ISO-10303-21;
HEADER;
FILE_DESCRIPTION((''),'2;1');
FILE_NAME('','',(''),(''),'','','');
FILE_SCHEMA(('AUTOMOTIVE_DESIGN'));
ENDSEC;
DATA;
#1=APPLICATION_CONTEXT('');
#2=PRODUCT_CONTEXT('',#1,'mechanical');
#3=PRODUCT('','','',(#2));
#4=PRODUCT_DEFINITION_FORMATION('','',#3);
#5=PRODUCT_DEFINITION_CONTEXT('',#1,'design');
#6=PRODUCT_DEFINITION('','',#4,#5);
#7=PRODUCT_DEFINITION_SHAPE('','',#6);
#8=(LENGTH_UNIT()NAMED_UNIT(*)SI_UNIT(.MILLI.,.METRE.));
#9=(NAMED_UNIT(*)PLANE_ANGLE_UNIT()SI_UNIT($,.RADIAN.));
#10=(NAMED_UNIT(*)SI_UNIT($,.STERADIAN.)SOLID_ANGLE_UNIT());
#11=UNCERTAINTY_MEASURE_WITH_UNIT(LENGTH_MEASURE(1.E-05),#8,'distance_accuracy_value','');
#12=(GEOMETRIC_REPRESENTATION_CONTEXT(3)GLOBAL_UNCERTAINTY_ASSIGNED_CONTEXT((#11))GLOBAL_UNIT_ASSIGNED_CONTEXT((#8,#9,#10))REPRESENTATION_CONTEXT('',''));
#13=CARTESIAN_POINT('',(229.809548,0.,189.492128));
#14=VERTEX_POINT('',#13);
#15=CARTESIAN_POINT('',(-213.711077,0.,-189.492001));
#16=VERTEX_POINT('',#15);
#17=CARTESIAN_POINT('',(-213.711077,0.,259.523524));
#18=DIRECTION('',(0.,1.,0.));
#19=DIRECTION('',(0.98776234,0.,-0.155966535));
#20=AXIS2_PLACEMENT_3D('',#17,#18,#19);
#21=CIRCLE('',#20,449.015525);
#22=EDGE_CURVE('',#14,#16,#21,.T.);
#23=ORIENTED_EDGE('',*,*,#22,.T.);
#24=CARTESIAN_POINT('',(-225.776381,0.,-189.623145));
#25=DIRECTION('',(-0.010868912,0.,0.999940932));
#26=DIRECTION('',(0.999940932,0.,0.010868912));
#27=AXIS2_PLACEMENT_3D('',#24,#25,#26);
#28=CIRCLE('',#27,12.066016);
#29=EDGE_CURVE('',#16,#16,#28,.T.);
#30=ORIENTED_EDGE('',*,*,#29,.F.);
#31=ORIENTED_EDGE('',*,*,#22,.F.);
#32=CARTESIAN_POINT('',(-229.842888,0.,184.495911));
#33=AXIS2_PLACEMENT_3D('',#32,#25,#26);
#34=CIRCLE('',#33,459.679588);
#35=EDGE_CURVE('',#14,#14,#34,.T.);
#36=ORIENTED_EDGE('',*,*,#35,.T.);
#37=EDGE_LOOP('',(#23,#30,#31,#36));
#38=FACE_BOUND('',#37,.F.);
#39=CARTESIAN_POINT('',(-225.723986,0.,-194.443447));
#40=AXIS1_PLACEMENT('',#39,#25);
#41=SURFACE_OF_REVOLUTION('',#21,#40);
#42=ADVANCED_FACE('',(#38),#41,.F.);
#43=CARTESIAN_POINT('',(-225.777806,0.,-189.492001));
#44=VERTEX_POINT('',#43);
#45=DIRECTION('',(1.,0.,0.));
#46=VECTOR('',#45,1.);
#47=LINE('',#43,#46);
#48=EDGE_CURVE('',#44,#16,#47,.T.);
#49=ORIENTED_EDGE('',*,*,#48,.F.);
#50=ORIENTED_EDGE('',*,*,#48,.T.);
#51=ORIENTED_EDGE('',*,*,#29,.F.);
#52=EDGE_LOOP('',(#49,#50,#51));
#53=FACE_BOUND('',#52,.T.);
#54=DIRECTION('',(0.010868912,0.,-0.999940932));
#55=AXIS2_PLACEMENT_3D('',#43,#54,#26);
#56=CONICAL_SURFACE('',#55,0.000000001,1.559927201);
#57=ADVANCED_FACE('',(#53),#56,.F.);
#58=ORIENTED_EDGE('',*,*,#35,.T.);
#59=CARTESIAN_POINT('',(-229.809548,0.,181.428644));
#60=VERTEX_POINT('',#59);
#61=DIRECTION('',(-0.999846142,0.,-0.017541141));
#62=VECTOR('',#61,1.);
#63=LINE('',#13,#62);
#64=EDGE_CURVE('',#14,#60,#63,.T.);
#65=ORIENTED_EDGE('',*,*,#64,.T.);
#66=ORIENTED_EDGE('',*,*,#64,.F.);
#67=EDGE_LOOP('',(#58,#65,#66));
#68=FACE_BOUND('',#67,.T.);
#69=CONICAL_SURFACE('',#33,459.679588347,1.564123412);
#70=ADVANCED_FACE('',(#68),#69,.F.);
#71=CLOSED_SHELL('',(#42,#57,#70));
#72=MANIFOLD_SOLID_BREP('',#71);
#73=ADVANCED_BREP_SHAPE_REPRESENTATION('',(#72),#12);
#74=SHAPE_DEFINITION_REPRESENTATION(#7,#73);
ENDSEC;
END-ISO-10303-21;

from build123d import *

# Parameters (mm, degrees)
F2_SCALE = 5


# Not quite as in the source:
# - a fillet or chamfer that OpenCascade refuses, or shapes differently, is made with other operations: its cross-section is extruded or revolved along the edge and cut away or added


with BuildPart() as f1:
    # F0 (on Front) → F1 (revolve)
    with BuildSketch(Plane.XZ):
        Polygon((45.9619096, 37.8984256), (-45.9619096, 36.2857288), (-45.1555612, -37.8984002), (45.9619096, -37.8984002), align=None)
    revolve(axis=Axis((-45.5587354, 0, -0.8063357), (-0.010868912, 0, 0.9999409316)))


with BuildPart() as f1_1:
    # F2: moved
    add(f1.part.scale(F2_SCALE))

    # F3: fillet of radius 449.015524587 on 2 edges, made by hand

    # F3_s1 → F3_t2 (revolve, cut)
    with BuildSketch(Plane.XZ):
        with BuildLine():
            ThreePointArc((229.809548, 189.492128), (77.982047099, -81.8414754589), (-213.7110771712, -189.492001))
            Line((-213.7110771712, -189.492001), (229.809548, -189.492001))
            Line((229.809548, -189.492001), (229.809548, 189.492128))
        make_face()
    revolve(axis=Axis((-225.723985986, 0, -194.4434473704), (-0.010868912, 0, 0.9999409316)), mode=Mode.SUBTRACT)


solid = f1_1.part
